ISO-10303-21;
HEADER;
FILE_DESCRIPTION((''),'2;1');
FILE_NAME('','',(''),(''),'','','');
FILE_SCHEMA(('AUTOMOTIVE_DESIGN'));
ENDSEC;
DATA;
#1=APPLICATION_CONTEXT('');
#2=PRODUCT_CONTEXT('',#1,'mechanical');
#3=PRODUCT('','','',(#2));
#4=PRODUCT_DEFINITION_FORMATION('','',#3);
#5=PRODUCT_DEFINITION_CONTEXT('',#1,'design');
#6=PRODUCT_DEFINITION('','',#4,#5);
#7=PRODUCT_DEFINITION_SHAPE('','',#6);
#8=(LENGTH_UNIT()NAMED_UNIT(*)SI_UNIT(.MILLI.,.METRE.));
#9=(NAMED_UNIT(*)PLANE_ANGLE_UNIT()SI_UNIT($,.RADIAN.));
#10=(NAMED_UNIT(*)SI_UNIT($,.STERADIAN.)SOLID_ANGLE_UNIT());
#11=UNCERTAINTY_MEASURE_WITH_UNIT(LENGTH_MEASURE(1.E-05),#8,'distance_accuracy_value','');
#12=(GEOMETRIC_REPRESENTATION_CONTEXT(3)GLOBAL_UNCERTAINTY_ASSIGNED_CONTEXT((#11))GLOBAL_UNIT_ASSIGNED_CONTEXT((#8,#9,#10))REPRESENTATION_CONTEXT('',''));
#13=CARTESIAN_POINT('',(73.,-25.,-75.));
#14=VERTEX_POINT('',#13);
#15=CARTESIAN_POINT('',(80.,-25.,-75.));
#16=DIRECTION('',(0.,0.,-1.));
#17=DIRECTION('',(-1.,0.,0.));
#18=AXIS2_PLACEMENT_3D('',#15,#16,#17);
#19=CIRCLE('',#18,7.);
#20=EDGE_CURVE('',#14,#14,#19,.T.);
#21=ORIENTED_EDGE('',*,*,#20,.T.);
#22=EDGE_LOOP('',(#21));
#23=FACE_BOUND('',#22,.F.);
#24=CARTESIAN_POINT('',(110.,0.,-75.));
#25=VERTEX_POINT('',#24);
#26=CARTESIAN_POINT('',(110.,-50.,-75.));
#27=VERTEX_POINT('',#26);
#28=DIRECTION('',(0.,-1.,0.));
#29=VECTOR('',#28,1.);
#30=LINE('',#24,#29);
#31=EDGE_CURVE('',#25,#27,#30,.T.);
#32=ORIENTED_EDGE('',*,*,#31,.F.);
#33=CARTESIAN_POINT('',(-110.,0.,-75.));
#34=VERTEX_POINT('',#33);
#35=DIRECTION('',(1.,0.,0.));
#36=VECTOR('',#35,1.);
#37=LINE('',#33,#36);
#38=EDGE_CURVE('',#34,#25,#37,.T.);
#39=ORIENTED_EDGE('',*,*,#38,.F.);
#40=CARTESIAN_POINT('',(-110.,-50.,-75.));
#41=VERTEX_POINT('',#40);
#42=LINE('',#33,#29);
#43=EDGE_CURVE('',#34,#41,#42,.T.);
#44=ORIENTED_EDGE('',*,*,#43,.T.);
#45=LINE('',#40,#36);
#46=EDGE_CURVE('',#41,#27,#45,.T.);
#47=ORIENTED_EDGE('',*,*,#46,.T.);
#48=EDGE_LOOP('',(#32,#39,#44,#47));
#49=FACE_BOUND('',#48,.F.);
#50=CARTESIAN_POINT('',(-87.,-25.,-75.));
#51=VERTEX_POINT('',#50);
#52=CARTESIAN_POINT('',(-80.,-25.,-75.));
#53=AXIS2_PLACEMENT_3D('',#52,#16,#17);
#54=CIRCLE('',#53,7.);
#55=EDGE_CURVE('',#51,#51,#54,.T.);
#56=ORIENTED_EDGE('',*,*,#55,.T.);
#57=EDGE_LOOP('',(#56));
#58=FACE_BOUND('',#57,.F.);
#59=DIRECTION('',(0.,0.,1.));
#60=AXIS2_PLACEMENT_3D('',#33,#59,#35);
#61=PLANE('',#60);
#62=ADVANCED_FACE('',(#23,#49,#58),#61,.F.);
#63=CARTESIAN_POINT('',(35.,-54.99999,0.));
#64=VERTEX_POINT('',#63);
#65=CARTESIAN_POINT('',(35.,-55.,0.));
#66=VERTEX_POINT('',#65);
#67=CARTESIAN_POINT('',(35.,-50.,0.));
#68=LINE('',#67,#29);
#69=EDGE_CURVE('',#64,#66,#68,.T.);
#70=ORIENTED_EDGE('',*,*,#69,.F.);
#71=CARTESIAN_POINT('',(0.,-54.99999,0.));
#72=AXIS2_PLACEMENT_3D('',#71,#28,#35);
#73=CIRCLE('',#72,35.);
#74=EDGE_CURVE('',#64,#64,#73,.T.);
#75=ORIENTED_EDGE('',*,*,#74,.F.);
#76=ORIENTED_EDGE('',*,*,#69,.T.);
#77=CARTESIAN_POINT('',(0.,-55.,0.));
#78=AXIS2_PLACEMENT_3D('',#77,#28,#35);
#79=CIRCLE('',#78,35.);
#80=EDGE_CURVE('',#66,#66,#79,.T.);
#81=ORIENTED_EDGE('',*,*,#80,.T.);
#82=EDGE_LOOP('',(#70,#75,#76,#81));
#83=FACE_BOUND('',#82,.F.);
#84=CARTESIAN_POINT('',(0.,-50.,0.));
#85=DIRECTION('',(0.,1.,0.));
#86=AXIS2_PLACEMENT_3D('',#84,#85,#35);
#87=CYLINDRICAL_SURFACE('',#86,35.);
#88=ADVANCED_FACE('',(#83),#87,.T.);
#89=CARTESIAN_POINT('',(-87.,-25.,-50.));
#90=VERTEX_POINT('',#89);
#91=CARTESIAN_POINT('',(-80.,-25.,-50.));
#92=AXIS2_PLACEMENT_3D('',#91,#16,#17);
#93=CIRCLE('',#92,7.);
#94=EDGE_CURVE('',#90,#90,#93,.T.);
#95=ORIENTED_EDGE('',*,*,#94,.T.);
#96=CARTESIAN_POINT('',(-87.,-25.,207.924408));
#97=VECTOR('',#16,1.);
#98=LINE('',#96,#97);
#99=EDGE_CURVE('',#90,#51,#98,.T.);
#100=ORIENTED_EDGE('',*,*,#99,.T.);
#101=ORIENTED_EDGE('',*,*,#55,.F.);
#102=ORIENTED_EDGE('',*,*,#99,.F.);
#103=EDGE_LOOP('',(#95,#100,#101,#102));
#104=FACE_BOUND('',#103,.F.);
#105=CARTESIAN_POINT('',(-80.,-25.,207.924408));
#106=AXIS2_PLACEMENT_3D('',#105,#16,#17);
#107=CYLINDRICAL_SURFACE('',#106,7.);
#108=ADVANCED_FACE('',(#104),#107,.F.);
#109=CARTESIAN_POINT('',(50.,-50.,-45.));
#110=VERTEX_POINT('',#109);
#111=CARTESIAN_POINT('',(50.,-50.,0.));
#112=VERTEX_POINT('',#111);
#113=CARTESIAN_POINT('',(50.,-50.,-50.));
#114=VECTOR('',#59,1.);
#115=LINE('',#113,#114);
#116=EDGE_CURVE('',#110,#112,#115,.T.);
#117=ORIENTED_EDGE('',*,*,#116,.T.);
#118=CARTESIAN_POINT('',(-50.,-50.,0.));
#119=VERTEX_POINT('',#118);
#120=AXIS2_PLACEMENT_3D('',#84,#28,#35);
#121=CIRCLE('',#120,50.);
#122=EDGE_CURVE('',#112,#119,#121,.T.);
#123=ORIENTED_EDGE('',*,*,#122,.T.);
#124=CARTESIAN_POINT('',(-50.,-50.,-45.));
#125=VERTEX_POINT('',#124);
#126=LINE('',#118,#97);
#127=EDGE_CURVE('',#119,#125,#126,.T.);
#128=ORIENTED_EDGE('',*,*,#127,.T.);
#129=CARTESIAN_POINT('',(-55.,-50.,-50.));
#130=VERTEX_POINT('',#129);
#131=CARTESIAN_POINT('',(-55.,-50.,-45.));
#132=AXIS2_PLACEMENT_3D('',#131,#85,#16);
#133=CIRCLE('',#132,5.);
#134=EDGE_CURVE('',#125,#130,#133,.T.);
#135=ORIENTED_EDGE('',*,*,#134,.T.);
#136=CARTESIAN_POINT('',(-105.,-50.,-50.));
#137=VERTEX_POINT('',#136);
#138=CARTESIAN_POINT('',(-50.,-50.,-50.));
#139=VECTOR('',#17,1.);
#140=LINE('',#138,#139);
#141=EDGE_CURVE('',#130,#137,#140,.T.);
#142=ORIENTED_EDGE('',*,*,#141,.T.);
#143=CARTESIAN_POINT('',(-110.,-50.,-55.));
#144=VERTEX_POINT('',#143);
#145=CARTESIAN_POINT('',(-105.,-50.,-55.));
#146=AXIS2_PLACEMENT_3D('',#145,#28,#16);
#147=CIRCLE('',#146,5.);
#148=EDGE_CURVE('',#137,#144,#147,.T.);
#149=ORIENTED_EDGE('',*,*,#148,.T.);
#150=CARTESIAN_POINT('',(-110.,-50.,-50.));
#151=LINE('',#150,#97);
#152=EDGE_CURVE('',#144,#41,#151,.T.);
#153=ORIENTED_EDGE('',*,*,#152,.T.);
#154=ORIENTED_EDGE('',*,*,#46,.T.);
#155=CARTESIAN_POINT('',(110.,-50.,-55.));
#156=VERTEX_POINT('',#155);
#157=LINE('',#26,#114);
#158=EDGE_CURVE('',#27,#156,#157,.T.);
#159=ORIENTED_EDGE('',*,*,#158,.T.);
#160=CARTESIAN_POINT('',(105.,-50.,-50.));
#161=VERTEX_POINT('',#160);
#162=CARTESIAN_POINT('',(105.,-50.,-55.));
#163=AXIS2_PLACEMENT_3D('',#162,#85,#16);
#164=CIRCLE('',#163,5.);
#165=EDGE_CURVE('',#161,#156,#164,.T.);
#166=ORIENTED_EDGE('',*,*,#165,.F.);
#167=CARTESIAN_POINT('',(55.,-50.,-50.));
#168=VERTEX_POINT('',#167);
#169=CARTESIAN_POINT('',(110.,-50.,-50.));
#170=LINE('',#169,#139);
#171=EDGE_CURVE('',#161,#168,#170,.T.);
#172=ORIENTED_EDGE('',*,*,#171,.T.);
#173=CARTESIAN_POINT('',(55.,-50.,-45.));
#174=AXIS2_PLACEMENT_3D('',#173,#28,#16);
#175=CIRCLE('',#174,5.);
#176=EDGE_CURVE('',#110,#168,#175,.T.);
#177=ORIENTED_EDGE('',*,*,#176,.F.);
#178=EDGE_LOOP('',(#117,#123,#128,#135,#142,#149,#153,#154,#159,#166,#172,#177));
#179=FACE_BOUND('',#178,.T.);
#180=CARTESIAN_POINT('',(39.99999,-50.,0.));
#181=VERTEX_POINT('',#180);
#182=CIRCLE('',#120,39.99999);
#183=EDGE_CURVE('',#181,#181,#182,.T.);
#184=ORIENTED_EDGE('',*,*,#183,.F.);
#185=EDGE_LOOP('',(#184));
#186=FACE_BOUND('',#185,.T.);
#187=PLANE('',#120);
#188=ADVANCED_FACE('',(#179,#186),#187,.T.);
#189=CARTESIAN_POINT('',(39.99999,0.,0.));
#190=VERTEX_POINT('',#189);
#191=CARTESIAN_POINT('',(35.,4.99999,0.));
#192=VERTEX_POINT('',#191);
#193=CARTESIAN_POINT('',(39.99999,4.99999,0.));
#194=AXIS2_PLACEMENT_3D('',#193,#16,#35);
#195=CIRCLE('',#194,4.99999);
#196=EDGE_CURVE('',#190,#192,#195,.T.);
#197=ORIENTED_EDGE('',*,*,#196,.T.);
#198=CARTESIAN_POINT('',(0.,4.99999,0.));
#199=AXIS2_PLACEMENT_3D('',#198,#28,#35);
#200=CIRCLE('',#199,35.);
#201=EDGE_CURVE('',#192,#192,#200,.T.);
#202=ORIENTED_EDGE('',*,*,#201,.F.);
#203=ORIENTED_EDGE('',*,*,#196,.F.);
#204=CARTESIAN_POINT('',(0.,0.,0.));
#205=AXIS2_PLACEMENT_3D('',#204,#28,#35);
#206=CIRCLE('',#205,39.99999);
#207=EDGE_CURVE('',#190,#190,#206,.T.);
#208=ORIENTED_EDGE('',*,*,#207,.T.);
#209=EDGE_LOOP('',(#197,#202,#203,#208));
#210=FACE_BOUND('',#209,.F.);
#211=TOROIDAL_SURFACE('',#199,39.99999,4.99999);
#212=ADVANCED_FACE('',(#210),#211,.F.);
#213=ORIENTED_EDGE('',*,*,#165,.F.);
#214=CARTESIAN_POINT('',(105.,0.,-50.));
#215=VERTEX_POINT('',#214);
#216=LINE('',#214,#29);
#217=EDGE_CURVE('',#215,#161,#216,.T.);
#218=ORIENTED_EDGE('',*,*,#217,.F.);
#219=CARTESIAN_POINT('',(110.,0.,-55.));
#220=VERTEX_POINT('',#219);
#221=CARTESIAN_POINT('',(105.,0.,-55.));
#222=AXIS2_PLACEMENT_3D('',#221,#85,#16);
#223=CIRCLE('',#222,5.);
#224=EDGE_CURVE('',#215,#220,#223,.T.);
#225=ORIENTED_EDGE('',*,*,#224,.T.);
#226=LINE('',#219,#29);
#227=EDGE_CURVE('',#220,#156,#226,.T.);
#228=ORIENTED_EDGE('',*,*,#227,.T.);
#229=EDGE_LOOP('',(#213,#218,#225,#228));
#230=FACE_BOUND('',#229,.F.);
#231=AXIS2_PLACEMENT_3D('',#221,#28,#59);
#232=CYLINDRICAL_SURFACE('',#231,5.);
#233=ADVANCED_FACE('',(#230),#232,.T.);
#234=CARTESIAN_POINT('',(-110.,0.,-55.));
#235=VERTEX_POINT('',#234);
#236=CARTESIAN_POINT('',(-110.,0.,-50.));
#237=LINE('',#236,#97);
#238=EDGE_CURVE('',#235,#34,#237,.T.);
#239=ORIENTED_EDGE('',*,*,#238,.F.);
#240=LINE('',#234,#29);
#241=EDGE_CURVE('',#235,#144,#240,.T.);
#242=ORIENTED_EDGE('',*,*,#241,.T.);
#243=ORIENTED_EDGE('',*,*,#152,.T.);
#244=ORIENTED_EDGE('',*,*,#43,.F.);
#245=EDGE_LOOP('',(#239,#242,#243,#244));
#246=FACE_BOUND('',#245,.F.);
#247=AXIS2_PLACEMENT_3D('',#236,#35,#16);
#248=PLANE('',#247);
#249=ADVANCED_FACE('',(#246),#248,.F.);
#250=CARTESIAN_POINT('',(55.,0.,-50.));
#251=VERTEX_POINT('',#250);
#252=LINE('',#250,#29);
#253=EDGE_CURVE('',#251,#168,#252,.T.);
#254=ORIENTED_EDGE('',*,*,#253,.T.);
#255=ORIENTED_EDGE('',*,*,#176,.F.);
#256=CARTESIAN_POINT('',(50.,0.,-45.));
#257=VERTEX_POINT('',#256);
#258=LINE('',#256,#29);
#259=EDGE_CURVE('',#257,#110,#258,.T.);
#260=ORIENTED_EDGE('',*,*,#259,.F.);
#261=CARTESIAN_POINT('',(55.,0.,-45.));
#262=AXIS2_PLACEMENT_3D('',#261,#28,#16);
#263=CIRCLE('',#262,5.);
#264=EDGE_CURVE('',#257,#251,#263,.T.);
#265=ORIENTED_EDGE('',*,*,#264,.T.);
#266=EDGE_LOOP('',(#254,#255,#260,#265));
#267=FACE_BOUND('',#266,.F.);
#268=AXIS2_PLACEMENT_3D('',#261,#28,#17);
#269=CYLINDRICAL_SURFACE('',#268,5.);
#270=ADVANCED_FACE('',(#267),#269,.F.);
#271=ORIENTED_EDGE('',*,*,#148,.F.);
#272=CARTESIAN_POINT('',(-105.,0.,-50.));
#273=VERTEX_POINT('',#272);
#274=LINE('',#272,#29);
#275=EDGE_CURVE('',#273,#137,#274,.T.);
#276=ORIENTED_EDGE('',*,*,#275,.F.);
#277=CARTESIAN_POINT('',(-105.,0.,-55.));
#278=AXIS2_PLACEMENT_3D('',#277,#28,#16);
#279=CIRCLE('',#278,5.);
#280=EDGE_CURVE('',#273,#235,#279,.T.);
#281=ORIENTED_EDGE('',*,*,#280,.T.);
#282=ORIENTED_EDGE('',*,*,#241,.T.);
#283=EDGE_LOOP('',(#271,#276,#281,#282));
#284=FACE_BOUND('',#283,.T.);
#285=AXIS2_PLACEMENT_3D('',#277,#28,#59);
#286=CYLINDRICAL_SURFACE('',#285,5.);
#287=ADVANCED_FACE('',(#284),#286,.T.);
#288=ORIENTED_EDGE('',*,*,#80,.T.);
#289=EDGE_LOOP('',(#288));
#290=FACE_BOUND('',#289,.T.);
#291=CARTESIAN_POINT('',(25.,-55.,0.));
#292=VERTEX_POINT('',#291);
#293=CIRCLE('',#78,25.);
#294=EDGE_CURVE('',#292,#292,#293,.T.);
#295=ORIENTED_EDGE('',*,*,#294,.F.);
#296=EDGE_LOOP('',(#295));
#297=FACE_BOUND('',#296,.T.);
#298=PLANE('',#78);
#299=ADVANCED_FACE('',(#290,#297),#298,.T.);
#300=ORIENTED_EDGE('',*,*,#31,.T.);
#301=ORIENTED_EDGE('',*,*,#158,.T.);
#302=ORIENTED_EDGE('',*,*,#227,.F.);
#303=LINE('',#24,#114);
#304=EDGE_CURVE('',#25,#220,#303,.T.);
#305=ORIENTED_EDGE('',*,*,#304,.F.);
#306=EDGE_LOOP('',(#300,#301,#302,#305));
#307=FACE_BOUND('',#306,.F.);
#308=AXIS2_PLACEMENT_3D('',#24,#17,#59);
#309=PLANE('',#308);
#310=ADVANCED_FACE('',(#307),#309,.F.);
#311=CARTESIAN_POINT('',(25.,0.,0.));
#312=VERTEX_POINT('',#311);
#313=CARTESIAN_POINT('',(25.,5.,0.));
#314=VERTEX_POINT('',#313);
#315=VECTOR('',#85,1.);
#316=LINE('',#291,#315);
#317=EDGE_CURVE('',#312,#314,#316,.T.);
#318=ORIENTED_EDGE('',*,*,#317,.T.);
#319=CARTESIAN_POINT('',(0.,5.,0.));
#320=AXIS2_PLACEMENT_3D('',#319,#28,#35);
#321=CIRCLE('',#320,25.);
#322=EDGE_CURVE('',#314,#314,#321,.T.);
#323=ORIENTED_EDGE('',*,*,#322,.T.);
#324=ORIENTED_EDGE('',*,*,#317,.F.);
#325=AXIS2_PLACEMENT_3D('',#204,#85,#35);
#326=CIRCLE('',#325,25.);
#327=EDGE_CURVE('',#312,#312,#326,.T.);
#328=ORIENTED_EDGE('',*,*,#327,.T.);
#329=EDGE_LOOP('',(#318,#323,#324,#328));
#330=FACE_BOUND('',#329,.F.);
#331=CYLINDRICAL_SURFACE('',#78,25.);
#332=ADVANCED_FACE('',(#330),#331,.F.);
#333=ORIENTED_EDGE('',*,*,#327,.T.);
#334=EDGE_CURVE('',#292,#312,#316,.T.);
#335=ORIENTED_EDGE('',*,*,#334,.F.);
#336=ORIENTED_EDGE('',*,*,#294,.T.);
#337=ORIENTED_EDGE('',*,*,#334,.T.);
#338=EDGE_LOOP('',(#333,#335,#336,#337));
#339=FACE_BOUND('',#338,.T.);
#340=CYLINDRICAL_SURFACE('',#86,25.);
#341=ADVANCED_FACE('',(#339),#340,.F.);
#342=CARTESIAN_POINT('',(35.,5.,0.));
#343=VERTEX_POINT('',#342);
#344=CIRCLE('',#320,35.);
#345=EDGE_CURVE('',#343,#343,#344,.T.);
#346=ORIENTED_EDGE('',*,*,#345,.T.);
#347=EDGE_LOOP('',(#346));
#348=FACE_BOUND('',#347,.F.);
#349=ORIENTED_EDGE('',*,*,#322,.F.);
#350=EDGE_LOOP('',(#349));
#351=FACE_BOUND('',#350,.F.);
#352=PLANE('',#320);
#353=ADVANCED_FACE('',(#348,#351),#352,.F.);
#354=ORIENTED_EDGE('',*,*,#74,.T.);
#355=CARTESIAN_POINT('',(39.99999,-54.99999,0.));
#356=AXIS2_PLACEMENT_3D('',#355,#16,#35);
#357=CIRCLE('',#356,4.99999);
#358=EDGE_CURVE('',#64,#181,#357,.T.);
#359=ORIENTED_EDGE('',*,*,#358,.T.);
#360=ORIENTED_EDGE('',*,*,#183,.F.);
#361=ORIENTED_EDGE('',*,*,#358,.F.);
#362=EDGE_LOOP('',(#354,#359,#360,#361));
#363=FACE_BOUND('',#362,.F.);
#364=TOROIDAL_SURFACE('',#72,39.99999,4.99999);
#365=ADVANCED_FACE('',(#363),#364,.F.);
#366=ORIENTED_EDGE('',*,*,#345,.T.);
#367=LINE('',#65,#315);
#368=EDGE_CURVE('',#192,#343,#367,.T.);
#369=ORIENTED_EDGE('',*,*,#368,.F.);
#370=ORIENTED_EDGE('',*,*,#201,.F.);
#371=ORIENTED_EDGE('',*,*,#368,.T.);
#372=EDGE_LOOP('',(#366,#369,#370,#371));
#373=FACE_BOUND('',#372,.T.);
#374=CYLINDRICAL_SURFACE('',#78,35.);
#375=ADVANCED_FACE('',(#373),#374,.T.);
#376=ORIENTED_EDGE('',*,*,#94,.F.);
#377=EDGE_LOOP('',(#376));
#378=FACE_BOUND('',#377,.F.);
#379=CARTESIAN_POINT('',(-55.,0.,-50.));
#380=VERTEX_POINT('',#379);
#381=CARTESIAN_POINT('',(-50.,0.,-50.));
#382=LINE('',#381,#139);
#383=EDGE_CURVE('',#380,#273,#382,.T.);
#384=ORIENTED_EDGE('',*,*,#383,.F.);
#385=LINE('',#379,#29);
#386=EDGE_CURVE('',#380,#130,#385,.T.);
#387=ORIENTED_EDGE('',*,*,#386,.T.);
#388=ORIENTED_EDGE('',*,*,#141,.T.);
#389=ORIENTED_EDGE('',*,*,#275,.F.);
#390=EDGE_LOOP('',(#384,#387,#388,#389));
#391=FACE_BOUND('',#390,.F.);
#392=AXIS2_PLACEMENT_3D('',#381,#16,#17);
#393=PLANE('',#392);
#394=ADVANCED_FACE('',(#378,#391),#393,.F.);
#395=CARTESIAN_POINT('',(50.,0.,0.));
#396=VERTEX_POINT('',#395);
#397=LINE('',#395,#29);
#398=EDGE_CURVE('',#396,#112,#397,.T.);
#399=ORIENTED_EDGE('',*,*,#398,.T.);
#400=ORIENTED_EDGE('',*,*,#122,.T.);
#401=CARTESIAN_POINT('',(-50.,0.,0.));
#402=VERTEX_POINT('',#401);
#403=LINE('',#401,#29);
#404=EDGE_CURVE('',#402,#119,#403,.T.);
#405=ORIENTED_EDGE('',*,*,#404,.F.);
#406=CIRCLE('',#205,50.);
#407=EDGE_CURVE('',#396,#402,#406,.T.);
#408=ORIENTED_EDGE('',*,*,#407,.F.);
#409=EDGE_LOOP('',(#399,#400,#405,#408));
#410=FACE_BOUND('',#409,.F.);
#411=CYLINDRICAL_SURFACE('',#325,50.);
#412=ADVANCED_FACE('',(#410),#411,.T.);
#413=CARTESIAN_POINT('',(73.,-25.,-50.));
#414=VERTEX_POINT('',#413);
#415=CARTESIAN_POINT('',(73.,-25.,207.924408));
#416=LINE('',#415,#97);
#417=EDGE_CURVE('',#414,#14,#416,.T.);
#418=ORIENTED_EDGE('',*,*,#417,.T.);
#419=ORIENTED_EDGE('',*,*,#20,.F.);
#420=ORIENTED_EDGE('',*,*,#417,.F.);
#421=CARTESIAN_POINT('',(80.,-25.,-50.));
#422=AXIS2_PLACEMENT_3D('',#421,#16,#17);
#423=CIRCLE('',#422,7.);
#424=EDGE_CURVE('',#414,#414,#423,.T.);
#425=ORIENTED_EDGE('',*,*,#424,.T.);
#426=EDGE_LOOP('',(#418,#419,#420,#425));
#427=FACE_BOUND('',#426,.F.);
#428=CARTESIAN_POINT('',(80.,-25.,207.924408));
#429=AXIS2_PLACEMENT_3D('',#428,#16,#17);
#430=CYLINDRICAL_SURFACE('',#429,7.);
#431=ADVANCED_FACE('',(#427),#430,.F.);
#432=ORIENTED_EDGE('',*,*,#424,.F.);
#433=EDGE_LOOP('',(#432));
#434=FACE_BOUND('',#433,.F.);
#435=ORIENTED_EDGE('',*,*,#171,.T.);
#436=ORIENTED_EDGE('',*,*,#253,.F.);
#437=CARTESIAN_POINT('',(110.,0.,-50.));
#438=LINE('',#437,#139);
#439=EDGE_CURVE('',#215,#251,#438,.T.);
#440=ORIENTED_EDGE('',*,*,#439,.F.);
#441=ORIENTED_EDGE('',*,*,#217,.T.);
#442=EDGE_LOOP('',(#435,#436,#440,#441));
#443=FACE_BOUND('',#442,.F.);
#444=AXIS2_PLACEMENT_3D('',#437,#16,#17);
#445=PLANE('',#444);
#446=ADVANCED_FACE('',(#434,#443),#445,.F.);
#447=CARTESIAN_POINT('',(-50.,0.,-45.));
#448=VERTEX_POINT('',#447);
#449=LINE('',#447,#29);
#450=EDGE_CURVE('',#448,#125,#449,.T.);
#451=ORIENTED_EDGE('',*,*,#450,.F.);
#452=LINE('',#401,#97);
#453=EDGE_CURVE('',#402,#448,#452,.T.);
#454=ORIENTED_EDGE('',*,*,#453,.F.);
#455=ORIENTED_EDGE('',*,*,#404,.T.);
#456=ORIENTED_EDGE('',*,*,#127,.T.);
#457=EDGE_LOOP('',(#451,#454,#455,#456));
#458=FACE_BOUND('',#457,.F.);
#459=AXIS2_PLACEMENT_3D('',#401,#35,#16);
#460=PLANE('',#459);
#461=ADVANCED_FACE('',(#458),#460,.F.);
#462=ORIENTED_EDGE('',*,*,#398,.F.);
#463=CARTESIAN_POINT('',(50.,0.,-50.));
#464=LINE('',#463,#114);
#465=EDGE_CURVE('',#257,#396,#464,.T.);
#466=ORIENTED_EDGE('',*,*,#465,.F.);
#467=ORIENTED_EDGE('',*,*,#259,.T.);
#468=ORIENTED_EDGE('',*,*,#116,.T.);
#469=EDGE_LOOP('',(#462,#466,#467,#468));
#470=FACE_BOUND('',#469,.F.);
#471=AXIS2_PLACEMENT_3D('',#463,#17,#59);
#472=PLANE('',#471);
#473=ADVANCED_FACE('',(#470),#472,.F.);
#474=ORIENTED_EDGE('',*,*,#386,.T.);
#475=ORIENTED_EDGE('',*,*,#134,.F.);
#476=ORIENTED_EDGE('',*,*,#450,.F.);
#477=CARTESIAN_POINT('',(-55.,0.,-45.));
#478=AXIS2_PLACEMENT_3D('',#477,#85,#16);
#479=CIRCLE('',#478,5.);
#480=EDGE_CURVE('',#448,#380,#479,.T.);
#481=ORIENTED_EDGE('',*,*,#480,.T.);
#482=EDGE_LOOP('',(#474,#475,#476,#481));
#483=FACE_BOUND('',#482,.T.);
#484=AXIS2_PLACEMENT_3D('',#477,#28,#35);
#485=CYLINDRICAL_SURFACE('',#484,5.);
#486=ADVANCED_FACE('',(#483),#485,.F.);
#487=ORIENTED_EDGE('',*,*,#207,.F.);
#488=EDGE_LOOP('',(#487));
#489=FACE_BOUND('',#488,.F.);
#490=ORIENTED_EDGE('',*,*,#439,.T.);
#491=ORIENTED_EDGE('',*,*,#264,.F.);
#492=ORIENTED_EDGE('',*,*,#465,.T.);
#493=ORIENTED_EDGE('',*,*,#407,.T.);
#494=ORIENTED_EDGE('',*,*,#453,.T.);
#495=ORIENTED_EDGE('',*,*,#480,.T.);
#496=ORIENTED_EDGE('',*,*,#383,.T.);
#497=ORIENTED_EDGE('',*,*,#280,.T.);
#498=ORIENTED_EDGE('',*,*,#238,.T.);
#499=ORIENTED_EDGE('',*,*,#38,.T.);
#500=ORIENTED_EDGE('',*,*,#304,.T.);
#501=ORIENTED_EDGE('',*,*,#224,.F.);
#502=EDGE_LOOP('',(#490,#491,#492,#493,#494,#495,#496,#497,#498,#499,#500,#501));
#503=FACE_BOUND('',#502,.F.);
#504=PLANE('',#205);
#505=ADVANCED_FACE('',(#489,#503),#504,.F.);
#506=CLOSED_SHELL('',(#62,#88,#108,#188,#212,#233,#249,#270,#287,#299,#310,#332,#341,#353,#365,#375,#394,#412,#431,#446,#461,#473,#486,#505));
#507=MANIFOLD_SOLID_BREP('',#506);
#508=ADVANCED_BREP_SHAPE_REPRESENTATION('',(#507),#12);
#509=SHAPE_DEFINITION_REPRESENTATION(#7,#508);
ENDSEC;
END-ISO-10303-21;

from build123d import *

# Parameters (mm, degrees)
F0_R       = 32.5
F0_R_2     = 25
F1_DEPTH   = 50
F4_D       = 14
F4_ON_F3_D = 14
F5_R       = 5
F6_R       = 35
F6_R_2     = 25
F7_DEPTH   = 50
F8_R       = 35
F8_R_2     = 25
F9_DEPTH   = 5
F10_DEPTH  = 60
F11_R      = 4.99999


# Not quite as in the source:
# - a fillet or chamfer is up to 0.001 mm smaller than in the source, because OpenCascade refuses the exact size


with BuildPart() as f1:
    # F0 (on Front) → F1 (new body)
    with BuildSketch(Plane.XZ):
        with BuildLine():
            ThreePointArc((-50, 0), (0, -50), (50, 0))
            ThreePointArc((50, 0), (0, 50), (-50, 0))
        make_face()
        Circle(F0_R, mode=Mode.SUBTRACT)
        with BuildLine():
            Line((50, -50), (50, 0))
            ThreePointArc((50, 0), (0, -50), (-50, 0))
            Line((-50, 0), (-50, -50))
            Line((-50, -50), (-110, -50))
            Line((-110, -50), (-110, -75))
            Line((-110, -75), (110, -75))
            Line((110, -75), (110, -50))
            Line((110, -50), (50, -50))
        make_face()
        Circle(F0_R)
        Circle(F0_R_2, mode=Mode.SUBTRACT)
    extrude(amount=F1_DEPTH)

    # F4 (through all)
    with Locations(Plane.XY.offset(-50)):
        with Locations((-80, -25)):
            Hole(F4_D / 2)

    # F4 on F3 (through all)
    with Locations(Plane.XY.offset(-50)):
        with Locations((80, -25)):
            Hole(F4_ON_F3_D / 2)

    # F5
    f5_edges = [f1.edges().sort_by_distance(p)[0] for p in [
        (50, -25, -50),
        (-50, -25, -50),
        (110, -25, -50),
        (-110, -25, -50),
    ]]
    fillet(f5_edges, radius=F5_R)

    # F6 (on face) → F7 (join)
    with BuildSketch(Plane(origin=(0, 0, 0), x_dir=(-1, 0, 0), z_dir=(0, 1, 0))):
        Circle(F6_R)
        Circle(F6_R_2, mode=Mode.SUBTRACT)
    extrude(amount=-F7_DEPTH)

    # F8 (on face) → F9 (join)
    with BuildSketch(Plane.XZ.offset(50)):
        Circle(F8_R)
        Circle(F8_R_2, mode=Mode.SUBTRACT)
    extrude(amount=F9_DEPTH)

    # F10 (add): a face of the model
    f10_faces = [f1.faces().sort_by_distance(p)[0] for p in [
        (-34.0100505063, -55, 0),
    ]]
    extrude(f10_faces, amount=-F10_DEPTH)

    # F11 (radius 5 in the source; OpenCascade refuses exactly that, so slightly less here)
    f11_edges = [f1.edges().sort_by_distance(p)[0] for p in [
        (-35, -50, 0),
        (-35, 0, 0),
    ]]
    fillet(f11_edges, radius=F11_R)


solid = f1.part
